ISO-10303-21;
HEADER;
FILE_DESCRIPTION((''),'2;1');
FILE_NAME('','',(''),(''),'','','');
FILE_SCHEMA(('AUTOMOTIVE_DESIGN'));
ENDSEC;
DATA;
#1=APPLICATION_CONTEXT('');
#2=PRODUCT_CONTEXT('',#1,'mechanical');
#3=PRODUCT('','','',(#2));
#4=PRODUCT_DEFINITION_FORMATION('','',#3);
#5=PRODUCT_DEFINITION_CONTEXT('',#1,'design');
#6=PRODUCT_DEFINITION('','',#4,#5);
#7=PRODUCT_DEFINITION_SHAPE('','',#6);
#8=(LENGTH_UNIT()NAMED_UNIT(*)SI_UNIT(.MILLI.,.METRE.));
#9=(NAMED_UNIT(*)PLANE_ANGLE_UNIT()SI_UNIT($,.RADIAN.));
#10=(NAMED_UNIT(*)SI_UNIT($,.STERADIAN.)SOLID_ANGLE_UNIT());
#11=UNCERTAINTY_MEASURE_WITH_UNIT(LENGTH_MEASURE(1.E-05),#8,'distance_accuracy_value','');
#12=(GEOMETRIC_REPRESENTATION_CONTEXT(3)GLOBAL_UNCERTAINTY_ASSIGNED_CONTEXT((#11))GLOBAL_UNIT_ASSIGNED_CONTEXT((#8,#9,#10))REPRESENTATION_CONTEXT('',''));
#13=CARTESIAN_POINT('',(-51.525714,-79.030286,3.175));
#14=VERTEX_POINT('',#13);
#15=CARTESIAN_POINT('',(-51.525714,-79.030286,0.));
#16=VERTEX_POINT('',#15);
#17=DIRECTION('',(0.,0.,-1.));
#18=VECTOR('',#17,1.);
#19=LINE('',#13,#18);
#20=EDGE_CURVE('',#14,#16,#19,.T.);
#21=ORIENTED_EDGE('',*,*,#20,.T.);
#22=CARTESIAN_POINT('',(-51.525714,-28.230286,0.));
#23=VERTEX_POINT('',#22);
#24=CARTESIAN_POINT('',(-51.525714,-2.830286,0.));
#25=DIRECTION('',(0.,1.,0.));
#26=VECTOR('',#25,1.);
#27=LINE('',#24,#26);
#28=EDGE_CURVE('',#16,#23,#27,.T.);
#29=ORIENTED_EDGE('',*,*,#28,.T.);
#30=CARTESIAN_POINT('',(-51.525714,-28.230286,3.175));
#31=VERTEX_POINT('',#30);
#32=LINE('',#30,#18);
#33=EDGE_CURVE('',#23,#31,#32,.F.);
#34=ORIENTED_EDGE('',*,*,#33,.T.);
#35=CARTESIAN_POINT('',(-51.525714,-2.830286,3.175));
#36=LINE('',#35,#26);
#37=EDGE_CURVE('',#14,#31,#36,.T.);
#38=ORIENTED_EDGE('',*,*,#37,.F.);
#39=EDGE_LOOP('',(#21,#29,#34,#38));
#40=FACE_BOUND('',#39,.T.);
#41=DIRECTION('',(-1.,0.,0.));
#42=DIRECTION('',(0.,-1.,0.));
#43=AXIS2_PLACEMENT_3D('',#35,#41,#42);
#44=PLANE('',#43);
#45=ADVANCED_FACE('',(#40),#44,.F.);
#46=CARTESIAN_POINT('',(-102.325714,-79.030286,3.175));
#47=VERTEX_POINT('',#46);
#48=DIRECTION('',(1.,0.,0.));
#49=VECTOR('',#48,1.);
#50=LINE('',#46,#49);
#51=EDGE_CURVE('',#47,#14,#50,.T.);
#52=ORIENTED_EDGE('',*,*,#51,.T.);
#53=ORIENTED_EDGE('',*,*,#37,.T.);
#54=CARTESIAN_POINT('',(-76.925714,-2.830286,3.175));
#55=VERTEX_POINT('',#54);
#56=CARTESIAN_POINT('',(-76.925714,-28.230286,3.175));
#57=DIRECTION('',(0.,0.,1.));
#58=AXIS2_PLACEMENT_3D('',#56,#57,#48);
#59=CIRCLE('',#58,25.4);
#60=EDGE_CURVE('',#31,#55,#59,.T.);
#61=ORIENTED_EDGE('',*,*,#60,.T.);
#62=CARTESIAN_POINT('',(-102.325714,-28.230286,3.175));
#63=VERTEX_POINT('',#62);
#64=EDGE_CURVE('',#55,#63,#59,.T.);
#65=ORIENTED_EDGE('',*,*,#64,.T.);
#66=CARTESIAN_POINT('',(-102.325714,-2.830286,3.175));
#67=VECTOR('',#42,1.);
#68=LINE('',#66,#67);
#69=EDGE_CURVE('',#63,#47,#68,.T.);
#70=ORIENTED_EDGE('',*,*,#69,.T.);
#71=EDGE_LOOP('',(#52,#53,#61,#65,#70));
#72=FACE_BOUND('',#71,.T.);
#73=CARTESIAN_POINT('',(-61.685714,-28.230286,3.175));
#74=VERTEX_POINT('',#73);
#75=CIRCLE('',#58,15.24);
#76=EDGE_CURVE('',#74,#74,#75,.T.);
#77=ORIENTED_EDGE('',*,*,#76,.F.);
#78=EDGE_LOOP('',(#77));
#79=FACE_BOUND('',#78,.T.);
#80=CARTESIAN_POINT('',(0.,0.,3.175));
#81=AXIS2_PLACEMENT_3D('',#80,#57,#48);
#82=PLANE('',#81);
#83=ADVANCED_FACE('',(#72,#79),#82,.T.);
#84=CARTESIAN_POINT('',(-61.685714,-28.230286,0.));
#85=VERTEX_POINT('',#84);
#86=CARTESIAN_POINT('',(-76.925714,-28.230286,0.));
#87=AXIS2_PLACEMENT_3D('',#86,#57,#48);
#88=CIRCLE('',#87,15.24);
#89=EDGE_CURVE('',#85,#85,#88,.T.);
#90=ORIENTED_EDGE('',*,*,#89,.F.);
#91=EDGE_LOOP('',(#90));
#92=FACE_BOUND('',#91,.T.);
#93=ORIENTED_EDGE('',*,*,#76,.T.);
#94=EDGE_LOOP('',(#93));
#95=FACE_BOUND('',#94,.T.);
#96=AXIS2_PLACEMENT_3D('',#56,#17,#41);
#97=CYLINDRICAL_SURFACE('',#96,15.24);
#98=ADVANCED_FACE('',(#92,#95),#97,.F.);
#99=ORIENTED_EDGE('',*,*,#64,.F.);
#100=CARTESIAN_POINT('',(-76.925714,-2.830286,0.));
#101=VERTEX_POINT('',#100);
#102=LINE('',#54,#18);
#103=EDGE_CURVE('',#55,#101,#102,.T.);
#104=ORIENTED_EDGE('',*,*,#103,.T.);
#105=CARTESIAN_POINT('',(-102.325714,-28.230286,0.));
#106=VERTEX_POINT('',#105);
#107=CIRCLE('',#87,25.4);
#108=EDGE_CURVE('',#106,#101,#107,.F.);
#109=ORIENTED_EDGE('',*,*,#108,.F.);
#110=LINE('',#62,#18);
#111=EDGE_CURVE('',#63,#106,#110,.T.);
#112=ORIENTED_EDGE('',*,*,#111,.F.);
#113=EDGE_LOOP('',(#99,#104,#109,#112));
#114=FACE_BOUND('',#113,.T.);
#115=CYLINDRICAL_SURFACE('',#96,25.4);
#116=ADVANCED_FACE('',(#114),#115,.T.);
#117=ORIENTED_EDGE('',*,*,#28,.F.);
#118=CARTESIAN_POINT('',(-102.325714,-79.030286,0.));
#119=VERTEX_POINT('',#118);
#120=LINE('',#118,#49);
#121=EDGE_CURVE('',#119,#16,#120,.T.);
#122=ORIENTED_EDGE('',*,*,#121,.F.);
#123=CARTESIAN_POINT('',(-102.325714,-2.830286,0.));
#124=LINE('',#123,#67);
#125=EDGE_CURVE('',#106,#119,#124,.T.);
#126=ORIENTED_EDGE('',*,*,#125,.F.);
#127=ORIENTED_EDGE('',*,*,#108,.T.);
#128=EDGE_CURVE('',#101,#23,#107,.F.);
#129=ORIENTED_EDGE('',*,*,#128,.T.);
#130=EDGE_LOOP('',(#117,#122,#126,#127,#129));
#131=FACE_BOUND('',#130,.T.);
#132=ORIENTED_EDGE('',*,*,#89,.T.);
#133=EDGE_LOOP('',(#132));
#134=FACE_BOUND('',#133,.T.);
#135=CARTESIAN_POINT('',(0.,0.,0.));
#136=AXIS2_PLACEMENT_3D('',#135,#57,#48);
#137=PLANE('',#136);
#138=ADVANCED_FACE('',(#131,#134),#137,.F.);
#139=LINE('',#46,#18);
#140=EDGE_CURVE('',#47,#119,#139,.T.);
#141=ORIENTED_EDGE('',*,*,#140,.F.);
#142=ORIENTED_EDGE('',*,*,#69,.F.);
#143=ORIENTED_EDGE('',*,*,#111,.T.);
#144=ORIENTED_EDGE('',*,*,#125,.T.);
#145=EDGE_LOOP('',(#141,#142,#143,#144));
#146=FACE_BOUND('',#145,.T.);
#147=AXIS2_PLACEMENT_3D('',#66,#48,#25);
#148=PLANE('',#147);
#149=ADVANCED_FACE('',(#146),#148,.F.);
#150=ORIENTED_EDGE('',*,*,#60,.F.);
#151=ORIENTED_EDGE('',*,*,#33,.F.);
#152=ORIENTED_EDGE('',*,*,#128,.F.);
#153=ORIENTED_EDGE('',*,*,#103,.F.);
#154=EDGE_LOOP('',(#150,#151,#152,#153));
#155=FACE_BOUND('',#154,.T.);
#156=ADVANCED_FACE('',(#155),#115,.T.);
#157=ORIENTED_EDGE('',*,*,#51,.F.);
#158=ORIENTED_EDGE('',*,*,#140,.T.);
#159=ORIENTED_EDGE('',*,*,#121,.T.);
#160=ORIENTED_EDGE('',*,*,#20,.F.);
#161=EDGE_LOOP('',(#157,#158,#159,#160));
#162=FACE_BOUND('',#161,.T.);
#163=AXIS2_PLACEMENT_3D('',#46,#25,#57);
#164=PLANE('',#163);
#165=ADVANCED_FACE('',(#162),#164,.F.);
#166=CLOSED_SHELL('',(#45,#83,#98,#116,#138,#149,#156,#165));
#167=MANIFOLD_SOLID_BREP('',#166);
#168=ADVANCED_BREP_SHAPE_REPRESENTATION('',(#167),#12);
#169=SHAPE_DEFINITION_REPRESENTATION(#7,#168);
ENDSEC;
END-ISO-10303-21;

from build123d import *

# Parameters (mm, degrees)
SKETCH1_W           = 50.8
SKETCH1_H           = 76.2
SKETCH1_R           = 15.24
BOSS_EXTRUDE1_DEPTH = 3.175
FILLET1_R           = 25.4


with BuildPart() as part:
    # Sketch1 → Boss-Extrude1 (new body)
    with BuildSketch(Plane.XY):
        with Locations((-76.925714286, -40.930285714)):
            Rectangle(SKETCH1_W, SKETCH1_H)
        with Locations((-76.925714286, -28.230285714)):
            Circle(SKETCH1_R, mode=Mode.SUBTRACT)
    extrude(amount=BOSS_EXTRUDE1_DEPTH)

    # Fillet1
    fillet1_edges = [part.edges().sort_by_distance(p)[0] for p in [
        (-102.325714286, -2.830285714, 1.5875),
        (-51.525714286, -2.830285714, 1.5875),
    ]]
    fillet(fillet1_edges, radius=FILLET1_R - 0.0001)  # a hair under: the kernel refuses the full size


solid = part.part
